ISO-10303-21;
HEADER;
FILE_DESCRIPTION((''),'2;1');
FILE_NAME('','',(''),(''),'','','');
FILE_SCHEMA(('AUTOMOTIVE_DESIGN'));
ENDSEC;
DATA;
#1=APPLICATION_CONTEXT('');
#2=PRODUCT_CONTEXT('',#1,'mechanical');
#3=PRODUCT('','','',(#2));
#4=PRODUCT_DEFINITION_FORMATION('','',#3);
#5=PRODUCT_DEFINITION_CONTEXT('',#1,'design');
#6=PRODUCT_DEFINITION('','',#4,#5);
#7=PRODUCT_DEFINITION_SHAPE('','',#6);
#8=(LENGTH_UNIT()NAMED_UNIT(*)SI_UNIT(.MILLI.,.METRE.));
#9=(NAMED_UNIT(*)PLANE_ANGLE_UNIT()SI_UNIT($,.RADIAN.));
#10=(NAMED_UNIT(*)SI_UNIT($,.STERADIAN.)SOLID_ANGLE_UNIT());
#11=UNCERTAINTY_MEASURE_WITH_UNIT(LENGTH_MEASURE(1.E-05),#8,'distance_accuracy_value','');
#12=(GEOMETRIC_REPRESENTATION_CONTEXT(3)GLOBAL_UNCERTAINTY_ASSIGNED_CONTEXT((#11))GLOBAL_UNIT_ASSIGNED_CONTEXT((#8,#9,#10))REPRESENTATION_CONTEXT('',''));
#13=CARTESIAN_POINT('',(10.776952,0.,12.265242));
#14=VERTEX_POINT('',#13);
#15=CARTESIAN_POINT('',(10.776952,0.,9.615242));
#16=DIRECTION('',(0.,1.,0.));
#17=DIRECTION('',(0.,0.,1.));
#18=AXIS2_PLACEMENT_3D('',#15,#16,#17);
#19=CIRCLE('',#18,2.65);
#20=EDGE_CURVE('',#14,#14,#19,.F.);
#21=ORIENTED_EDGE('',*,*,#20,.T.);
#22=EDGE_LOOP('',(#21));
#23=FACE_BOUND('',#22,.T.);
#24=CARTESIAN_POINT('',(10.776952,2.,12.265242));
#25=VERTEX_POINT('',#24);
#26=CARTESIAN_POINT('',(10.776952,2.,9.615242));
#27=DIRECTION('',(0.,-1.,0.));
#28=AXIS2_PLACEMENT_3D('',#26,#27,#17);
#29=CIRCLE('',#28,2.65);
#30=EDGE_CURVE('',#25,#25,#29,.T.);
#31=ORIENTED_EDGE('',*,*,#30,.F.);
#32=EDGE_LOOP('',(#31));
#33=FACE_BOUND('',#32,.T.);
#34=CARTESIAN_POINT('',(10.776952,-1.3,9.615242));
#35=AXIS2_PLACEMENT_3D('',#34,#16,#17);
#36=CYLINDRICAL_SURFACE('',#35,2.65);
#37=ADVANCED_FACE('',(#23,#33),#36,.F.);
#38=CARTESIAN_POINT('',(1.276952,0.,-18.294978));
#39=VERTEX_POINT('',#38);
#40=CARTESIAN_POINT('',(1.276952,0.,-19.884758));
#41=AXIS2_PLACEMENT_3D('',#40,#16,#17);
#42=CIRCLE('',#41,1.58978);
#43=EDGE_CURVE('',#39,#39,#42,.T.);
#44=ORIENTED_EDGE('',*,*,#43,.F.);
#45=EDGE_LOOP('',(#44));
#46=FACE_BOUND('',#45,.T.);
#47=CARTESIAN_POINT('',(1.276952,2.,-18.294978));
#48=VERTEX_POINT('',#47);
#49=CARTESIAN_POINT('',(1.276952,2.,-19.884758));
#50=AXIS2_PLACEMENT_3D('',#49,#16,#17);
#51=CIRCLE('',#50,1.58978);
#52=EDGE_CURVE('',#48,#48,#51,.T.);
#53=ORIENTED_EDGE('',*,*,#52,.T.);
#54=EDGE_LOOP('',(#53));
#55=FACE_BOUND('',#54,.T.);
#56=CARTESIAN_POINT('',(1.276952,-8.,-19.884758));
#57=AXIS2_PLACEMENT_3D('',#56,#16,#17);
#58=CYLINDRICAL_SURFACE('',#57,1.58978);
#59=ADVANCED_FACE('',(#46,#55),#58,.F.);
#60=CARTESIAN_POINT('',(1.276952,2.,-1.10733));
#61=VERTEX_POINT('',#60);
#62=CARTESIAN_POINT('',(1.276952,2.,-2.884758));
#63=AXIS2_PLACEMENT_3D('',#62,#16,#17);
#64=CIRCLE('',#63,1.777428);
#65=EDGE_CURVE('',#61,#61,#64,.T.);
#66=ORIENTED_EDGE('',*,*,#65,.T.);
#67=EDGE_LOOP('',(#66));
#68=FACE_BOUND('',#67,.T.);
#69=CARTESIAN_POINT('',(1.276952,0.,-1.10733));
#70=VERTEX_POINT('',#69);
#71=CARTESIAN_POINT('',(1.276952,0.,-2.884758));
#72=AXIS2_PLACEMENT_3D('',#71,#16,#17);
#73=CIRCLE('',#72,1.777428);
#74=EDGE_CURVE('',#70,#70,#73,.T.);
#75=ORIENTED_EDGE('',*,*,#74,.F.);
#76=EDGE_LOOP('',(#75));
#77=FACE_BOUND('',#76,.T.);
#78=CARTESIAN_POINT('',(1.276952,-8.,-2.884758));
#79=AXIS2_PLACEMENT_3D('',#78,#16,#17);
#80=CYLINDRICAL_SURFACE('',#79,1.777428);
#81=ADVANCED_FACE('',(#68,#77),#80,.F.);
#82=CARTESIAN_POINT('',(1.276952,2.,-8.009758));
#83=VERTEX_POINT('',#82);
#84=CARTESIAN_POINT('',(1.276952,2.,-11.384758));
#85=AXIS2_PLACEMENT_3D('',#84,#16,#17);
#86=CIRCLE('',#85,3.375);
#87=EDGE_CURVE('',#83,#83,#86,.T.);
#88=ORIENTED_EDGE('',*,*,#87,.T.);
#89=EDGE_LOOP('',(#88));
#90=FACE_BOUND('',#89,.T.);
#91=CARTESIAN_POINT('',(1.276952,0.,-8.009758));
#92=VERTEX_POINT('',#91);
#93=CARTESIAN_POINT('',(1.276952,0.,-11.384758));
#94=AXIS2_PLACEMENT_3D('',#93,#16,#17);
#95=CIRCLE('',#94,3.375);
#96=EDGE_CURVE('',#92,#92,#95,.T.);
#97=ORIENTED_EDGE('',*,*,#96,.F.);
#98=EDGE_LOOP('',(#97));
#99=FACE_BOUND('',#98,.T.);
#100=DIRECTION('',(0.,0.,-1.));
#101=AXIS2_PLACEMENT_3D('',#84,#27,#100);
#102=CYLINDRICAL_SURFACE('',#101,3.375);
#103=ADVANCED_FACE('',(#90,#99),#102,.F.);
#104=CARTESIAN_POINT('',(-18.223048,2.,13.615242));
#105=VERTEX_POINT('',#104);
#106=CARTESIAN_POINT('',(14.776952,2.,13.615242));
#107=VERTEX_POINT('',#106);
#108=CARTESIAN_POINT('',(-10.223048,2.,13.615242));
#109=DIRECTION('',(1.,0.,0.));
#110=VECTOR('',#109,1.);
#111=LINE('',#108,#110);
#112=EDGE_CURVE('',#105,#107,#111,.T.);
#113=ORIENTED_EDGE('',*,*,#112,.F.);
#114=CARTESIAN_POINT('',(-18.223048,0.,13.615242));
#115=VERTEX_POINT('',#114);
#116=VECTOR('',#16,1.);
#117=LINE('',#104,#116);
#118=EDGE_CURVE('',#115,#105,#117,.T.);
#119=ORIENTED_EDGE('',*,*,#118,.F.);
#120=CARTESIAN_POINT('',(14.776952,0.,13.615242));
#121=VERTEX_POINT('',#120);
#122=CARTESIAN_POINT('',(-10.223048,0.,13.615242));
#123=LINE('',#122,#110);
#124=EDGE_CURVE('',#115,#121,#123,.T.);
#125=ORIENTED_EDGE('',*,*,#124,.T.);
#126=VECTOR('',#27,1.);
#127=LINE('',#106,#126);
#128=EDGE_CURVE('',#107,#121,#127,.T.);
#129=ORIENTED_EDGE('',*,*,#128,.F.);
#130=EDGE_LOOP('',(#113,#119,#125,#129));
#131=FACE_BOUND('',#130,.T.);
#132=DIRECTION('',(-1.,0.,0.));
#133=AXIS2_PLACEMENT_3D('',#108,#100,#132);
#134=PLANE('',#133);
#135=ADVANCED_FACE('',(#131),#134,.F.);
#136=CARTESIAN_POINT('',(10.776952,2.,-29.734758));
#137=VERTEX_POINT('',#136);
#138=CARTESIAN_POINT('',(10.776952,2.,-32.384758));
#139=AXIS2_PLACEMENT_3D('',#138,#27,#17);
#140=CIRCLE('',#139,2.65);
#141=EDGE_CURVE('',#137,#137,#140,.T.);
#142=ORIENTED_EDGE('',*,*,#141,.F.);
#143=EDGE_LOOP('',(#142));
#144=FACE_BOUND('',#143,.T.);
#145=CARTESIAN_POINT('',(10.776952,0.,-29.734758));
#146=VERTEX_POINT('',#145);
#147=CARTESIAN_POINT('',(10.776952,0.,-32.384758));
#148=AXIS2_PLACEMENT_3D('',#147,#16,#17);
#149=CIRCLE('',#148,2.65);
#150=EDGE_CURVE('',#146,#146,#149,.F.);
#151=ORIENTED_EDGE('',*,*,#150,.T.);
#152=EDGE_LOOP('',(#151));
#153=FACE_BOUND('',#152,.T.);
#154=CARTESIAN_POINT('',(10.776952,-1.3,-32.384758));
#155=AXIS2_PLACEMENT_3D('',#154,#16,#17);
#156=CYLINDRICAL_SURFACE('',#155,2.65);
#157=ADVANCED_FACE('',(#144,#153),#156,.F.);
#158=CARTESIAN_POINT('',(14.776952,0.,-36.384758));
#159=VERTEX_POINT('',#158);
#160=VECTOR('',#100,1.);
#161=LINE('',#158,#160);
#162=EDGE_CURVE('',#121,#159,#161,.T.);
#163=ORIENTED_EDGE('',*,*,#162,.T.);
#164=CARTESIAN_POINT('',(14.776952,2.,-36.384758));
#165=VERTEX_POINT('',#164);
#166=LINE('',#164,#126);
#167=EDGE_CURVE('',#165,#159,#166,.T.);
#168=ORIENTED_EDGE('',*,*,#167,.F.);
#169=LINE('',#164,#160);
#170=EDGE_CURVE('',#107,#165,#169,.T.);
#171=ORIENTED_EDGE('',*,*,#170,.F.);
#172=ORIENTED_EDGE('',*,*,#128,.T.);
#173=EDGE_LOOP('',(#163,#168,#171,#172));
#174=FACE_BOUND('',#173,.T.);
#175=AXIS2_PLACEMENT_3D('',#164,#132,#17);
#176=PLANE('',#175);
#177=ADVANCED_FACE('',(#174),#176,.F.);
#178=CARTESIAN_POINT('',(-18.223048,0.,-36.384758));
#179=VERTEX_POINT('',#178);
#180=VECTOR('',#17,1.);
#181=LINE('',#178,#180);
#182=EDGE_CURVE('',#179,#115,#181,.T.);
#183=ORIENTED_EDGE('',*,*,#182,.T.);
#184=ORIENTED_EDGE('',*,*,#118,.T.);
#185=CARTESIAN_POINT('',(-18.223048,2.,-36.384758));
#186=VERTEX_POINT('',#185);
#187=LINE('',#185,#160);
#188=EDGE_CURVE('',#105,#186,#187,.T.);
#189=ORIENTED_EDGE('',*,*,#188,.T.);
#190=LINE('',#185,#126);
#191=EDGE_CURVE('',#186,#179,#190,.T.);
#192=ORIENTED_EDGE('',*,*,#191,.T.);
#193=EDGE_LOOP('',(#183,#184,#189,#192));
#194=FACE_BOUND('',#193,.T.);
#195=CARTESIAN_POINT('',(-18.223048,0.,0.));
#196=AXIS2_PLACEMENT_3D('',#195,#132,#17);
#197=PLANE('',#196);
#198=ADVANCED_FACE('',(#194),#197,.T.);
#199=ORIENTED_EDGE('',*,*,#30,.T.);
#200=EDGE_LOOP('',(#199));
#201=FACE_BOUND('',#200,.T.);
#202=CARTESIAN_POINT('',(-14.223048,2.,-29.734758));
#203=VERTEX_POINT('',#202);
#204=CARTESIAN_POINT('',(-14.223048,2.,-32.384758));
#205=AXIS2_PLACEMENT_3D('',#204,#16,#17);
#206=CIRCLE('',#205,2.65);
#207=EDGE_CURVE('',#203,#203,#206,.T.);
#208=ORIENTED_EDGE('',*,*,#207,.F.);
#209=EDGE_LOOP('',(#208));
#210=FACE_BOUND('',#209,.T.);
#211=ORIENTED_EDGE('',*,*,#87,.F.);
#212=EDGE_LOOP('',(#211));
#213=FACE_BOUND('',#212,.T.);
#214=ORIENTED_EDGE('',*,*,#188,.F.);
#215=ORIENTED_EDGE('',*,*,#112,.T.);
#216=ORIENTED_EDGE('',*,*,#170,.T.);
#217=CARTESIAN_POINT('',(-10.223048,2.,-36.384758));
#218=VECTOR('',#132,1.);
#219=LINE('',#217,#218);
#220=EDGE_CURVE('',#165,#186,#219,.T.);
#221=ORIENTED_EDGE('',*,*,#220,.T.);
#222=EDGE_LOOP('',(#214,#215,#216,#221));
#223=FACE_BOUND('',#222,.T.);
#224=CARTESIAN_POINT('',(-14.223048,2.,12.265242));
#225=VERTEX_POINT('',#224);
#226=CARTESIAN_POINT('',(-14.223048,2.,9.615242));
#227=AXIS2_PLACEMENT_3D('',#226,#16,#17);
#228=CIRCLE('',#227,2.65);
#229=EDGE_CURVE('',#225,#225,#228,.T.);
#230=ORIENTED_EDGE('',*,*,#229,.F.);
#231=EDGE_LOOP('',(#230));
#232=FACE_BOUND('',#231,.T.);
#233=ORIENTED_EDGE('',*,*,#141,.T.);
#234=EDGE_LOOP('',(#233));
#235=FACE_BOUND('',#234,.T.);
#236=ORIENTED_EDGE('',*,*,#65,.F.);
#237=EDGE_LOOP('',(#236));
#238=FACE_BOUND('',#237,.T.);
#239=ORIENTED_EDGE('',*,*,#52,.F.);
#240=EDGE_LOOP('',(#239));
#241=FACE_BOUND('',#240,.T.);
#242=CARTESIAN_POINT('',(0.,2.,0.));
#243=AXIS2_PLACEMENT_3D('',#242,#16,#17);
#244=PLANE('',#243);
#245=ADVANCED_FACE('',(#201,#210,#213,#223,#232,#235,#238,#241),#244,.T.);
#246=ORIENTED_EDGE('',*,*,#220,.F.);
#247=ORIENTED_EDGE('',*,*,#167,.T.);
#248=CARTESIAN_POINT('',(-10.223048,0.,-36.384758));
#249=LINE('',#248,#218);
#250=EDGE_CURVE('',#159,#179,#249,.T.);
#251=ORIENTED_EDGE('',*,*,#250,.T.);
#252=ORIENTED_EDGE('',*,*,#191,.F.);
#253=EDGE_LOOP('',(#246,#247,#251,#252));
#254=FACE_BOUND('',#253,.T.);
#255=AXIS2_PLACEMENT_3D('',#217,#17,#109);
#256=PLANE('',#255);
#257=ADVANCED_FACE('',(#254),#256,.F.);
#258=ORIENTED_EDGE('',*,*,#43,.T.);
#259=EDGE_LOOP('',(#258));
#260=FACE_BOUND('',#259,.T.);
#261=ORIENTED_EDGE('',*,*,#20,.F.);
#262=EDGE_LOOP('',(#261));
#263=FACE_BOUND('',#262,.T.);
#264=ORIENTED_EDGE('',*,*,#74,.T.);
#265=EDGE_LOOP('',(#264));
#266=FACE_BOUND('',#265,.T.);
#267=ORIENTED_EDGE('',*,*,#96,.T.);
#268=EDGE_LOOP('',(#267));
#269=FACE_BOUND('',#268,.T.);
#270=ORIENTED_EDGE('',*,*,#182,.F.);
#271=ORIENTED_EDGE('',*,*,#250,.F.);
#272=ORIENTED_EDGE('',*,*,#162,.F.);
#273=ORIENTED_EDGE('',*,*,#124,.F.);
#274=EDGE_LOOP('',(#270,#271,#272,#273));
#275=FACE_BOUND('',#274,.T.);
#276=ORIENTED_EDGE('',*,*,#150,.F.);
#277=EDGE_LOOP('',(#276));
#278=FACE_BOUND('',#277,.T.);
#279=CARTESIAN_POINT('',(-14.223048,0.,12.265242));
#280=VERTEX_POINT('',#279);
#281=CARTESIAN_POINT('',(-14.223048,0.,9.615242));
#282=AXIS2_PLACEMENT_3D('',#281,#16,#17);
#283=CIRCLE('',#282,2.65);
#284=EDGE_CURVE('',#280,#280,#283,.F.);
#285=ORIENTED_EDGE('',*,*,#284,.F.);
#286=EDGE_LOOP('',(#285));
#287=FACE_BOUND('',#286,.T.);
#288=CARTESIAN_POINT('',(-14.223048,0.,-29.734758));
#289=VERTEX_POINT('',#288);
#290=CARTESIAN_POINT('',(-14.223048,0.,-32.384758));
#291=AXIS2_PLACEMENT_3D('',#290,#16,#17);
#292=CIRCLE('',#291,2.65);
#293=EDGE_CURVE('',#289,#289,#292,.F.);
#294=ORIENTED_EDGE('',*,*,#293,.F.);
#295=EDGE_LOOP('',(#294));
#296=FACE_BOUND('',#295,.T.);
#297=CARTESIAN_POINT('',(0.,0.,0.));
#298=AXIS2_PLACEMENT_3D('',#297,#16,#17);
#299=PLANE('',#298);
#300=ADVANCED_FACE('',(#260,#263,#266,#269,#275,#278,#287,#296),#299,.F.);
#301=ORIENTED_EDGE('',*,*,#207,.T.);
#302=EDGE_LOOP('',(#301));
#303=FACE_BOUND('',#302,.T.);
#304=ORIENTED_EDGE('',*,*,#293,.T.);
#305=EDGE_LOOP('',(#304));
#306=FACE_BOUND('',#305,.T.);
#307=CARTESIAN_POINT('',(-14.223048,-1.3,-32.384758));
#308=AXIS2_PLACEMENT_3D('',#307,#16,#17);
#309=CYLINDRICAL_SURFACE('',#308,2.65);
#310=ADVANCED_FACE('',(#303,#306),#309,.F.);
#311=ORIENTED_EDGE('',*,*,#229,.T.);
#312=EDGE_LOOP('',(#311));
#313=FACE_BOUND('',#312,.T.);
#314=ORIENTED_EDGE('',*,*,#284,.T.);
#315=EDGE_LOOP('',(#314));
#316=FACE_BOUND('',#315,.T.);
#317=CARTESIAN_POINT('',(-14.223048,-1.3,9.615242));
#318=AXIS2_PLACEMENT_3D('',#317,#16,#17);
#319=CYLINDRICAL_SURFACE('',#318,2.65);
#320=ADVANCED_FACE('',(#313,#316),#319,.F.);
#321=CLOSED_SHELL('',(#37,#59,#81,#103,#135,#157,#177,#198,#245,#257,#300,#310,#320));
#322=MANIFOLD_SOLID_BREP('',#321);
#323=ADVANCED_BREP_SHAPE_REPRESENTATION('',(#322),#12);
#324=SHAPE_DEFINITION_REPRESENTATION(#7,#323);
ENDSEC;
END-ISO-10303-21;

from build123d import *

# Parameters (mm, degrees)
SKETCH1_W           = 25
SKETCH1_H           = 50
SKETCH1_R           = 3.375
BOSS_EXTRUDE1_DEPTH = 2
SKETCH2_W           = 50
SKETCH2_H           = 2
BOSS_EXTRUDE2_DEPTH = 8
SKETCH3_W           = 8
SKETCH3_H           = 50
BOSS_EXTRUDE3_DEPTH = 42
SKETCH4_R           = 2.65
CUT_EXTRUDE1_DEPTH  = 3.3
SKETCH5_R           = 5.802370205
CUT_EXTRUDE2_DEPTH  = 9
FILLET2_R           = 1
SKETCH6_R           = 12.7
BOSS_EXTRUDE4_DEPTH = 2
FILLET4_R           = 1
SKETCH8_R           = 1.589780168
SKETCH8_R_2         = 1.777428262
CUT_EXTRUDE3_DEPTH  = 10
SKETCH9_W           = 8
SKETCH9_H           = 42
CUT_EXTRUDE4_DEPTH  = 68.79439129
SKETCH10_W          = 33.517939775
SKETCH10_H          = 7.212330843
CUT_EXTRUDE5_DEPTH  = 55


with BuildPart() as part:
    # Sketch1 → Boss-Extrude1 (new body)
    with BuildSketch(Plane(origin=(0, 0, 0), x_dir=(1, 0, 0), z_dir=(0, 1, 0))):
        with Locations((2.276951673, 11.384758364)):
            Rectangle(SKETCH1_W, SKETCH1_H)
        with Locations(Location((1.276951673, 11.384758364, 0), (0, 0, 270))):
            Circle(SKETCH1_R, mode=Mode.SUBTRACT)
    extrude(amount=BOSS_EXTRUDE1_DEPTH)

    # Sketch2 → Boss-Extrude2 (add)
    with BuildSketch(Plane.ZY.offset(10.223048327)):
        with Locations((-11.384758364, 1)):
            Rectangle(SKETCH2_W, SKETCH2_H)
    extrude(amount=BOSS_EXTRUDE2_DEPTH)

    # Sketch3 → Boss-Extrude3 (add)
    with BuildSketch(Plane.XZ):
        with Locations((-14.223048327, -11.384758364)):
            Rectangle(SKETCH3_W, SKETCH3_H)
    extrude(amount=BOSS_EXTRUDE3_DEPTH)

    # Sketch4 → Cut-Extrude1 (cut)
    with BuildSketch(Plane(origin=(0, 2, 0), x_dir=(1, 0, 0), z_dir=(0, 1, 0))):
        with Locations(Location((-14.223048327, 32.384758364, 0), (0, 0, 270))):
            Circle(SKETCH4_R)
        with Locations(Location((-14.223048327, -9.615241636, 0), (0, 0, 270))):
            Circle(SKETCH4_R)
    cut_extrude1 = extrude(amount=-CUT_EXTRUDE1_DEPTH, mode=Mode.SUBTRACT)

    # Mirror1: Cut-Extrude1 across plane
    add(cut_extrude1.mirror(Plane.ZX.offset(-20)), mode=Mode.SUBTRACT)

    # Sketch5 → Cut-Extrude2 (cut)
    with BuildSketch(Plane.ZY.offset(18.223048327)):
        with Locations((-11.836279124, -21)):
            Circle(SKETCH5_R)
    extrude(amount=-CUT_EXTRUDE2_DEPTH, mode=Mode.SUBTRACT)

    # Fillet2
    fillet2_edges = [part.edges().sort_by_distance(p)[0] for p in [
        (-10.223048327, -21, -17.638649329),
    ]]
    fillet(fillet2_edges, radius=FILLET2_R)

    # Mirror2: Cut-Extrude1 across plane
    add(cut_extrude1.mirror(Plane.ZY.offset(1.723048327)), mode=Mode.SUBTRACT)

    # Sketch6 → Boss-Extrude4 (add)
    with BuildSketch(Plane(origin=(0, 2, 0), x_dir=(1, 0, 0), z_dir=(0, 1, 0))):
        with BuildLine():
            Line((14.776951673, 5.567542535), (14.776951673, 17.201974193))
            ThreePointArc((14.776951673, 17.201974193), (-13.423048327, 11.384758364), (14.776951673, 5.567542535))
        make_face()
        with Locations(Location((1.276951673, 11.384758364, 0), (0, 0, 270))):
            Circle(SKETCH6_R, mode=Mode.SUBTRACT)
    extrude(amount=BOSS_EXTRUDE4_DEPTH)

    # Fillet4
    # the kernel refuses this fillet: 1 mm, written as the material it takes off along each edge
    with BuildSketch(Plane(origin=(14.776951673, 4, -3.067542535), x_dir=(0, -1, 0), z_dir=(0, 0, -1))) as fillet4_piece_1:
        with BuildLine():
            CenterArc((FILLET4_R, FILLET4_R), FILLET4_R, 180, 90)
            Line((0, FILLET4_R), (0, 0))
            Line((0, 0), (FILLET4_R, 0))
        make_face()
    extrude(amount=16.634431658, mode=Mode.SUBTRACT)

    # Sketch8 → Cut-Extrude3 (cut)
    with BuildSketch(Plane(origin=(0, 2, 0), x_dir=(1, 0, 0), z_dir=(0, 1, 0))):
        with Locations(Location((1.276951673, 19.884758364, 0), (0, 0, 270))):
            Circle(SKETCH8_R)
        with Locations(Location((1.276951673, 2.884758364, 0), (0, 0, 270))):
            Circle(SKETCH8_R_2)
    extrude(amount=-CUT_EXTRUDE3_DEPTH, mode=Mode.SUBTRACT)

    # Sketch9 → Cut-Extrude4 (cut, through all)
    with BuildSketch(Plane.XY.offset(13.615241636)):
        with Locations((-14.223048327, -21)):
            Rectangle(SKETCH9_W, SKETCH9_H)
    extrude(amount=-CUT_EXTRUDE4_DEPTH, mode=Mode.SUBTRACT)

    # Sketch10 → Cut-Extrude5 (cut)
    with BuildSketch(Plane.XY.offset(13.615241636)):
        with Locations((-1.464078439, 5.606165422)):
            Rectangle(SKETCH10_W, SKETCH10_H)
    extrude(amount=-CUT_EXTRUDE5_DEPTH, mode=Mode.SUBTRACT)


solid = part.part
